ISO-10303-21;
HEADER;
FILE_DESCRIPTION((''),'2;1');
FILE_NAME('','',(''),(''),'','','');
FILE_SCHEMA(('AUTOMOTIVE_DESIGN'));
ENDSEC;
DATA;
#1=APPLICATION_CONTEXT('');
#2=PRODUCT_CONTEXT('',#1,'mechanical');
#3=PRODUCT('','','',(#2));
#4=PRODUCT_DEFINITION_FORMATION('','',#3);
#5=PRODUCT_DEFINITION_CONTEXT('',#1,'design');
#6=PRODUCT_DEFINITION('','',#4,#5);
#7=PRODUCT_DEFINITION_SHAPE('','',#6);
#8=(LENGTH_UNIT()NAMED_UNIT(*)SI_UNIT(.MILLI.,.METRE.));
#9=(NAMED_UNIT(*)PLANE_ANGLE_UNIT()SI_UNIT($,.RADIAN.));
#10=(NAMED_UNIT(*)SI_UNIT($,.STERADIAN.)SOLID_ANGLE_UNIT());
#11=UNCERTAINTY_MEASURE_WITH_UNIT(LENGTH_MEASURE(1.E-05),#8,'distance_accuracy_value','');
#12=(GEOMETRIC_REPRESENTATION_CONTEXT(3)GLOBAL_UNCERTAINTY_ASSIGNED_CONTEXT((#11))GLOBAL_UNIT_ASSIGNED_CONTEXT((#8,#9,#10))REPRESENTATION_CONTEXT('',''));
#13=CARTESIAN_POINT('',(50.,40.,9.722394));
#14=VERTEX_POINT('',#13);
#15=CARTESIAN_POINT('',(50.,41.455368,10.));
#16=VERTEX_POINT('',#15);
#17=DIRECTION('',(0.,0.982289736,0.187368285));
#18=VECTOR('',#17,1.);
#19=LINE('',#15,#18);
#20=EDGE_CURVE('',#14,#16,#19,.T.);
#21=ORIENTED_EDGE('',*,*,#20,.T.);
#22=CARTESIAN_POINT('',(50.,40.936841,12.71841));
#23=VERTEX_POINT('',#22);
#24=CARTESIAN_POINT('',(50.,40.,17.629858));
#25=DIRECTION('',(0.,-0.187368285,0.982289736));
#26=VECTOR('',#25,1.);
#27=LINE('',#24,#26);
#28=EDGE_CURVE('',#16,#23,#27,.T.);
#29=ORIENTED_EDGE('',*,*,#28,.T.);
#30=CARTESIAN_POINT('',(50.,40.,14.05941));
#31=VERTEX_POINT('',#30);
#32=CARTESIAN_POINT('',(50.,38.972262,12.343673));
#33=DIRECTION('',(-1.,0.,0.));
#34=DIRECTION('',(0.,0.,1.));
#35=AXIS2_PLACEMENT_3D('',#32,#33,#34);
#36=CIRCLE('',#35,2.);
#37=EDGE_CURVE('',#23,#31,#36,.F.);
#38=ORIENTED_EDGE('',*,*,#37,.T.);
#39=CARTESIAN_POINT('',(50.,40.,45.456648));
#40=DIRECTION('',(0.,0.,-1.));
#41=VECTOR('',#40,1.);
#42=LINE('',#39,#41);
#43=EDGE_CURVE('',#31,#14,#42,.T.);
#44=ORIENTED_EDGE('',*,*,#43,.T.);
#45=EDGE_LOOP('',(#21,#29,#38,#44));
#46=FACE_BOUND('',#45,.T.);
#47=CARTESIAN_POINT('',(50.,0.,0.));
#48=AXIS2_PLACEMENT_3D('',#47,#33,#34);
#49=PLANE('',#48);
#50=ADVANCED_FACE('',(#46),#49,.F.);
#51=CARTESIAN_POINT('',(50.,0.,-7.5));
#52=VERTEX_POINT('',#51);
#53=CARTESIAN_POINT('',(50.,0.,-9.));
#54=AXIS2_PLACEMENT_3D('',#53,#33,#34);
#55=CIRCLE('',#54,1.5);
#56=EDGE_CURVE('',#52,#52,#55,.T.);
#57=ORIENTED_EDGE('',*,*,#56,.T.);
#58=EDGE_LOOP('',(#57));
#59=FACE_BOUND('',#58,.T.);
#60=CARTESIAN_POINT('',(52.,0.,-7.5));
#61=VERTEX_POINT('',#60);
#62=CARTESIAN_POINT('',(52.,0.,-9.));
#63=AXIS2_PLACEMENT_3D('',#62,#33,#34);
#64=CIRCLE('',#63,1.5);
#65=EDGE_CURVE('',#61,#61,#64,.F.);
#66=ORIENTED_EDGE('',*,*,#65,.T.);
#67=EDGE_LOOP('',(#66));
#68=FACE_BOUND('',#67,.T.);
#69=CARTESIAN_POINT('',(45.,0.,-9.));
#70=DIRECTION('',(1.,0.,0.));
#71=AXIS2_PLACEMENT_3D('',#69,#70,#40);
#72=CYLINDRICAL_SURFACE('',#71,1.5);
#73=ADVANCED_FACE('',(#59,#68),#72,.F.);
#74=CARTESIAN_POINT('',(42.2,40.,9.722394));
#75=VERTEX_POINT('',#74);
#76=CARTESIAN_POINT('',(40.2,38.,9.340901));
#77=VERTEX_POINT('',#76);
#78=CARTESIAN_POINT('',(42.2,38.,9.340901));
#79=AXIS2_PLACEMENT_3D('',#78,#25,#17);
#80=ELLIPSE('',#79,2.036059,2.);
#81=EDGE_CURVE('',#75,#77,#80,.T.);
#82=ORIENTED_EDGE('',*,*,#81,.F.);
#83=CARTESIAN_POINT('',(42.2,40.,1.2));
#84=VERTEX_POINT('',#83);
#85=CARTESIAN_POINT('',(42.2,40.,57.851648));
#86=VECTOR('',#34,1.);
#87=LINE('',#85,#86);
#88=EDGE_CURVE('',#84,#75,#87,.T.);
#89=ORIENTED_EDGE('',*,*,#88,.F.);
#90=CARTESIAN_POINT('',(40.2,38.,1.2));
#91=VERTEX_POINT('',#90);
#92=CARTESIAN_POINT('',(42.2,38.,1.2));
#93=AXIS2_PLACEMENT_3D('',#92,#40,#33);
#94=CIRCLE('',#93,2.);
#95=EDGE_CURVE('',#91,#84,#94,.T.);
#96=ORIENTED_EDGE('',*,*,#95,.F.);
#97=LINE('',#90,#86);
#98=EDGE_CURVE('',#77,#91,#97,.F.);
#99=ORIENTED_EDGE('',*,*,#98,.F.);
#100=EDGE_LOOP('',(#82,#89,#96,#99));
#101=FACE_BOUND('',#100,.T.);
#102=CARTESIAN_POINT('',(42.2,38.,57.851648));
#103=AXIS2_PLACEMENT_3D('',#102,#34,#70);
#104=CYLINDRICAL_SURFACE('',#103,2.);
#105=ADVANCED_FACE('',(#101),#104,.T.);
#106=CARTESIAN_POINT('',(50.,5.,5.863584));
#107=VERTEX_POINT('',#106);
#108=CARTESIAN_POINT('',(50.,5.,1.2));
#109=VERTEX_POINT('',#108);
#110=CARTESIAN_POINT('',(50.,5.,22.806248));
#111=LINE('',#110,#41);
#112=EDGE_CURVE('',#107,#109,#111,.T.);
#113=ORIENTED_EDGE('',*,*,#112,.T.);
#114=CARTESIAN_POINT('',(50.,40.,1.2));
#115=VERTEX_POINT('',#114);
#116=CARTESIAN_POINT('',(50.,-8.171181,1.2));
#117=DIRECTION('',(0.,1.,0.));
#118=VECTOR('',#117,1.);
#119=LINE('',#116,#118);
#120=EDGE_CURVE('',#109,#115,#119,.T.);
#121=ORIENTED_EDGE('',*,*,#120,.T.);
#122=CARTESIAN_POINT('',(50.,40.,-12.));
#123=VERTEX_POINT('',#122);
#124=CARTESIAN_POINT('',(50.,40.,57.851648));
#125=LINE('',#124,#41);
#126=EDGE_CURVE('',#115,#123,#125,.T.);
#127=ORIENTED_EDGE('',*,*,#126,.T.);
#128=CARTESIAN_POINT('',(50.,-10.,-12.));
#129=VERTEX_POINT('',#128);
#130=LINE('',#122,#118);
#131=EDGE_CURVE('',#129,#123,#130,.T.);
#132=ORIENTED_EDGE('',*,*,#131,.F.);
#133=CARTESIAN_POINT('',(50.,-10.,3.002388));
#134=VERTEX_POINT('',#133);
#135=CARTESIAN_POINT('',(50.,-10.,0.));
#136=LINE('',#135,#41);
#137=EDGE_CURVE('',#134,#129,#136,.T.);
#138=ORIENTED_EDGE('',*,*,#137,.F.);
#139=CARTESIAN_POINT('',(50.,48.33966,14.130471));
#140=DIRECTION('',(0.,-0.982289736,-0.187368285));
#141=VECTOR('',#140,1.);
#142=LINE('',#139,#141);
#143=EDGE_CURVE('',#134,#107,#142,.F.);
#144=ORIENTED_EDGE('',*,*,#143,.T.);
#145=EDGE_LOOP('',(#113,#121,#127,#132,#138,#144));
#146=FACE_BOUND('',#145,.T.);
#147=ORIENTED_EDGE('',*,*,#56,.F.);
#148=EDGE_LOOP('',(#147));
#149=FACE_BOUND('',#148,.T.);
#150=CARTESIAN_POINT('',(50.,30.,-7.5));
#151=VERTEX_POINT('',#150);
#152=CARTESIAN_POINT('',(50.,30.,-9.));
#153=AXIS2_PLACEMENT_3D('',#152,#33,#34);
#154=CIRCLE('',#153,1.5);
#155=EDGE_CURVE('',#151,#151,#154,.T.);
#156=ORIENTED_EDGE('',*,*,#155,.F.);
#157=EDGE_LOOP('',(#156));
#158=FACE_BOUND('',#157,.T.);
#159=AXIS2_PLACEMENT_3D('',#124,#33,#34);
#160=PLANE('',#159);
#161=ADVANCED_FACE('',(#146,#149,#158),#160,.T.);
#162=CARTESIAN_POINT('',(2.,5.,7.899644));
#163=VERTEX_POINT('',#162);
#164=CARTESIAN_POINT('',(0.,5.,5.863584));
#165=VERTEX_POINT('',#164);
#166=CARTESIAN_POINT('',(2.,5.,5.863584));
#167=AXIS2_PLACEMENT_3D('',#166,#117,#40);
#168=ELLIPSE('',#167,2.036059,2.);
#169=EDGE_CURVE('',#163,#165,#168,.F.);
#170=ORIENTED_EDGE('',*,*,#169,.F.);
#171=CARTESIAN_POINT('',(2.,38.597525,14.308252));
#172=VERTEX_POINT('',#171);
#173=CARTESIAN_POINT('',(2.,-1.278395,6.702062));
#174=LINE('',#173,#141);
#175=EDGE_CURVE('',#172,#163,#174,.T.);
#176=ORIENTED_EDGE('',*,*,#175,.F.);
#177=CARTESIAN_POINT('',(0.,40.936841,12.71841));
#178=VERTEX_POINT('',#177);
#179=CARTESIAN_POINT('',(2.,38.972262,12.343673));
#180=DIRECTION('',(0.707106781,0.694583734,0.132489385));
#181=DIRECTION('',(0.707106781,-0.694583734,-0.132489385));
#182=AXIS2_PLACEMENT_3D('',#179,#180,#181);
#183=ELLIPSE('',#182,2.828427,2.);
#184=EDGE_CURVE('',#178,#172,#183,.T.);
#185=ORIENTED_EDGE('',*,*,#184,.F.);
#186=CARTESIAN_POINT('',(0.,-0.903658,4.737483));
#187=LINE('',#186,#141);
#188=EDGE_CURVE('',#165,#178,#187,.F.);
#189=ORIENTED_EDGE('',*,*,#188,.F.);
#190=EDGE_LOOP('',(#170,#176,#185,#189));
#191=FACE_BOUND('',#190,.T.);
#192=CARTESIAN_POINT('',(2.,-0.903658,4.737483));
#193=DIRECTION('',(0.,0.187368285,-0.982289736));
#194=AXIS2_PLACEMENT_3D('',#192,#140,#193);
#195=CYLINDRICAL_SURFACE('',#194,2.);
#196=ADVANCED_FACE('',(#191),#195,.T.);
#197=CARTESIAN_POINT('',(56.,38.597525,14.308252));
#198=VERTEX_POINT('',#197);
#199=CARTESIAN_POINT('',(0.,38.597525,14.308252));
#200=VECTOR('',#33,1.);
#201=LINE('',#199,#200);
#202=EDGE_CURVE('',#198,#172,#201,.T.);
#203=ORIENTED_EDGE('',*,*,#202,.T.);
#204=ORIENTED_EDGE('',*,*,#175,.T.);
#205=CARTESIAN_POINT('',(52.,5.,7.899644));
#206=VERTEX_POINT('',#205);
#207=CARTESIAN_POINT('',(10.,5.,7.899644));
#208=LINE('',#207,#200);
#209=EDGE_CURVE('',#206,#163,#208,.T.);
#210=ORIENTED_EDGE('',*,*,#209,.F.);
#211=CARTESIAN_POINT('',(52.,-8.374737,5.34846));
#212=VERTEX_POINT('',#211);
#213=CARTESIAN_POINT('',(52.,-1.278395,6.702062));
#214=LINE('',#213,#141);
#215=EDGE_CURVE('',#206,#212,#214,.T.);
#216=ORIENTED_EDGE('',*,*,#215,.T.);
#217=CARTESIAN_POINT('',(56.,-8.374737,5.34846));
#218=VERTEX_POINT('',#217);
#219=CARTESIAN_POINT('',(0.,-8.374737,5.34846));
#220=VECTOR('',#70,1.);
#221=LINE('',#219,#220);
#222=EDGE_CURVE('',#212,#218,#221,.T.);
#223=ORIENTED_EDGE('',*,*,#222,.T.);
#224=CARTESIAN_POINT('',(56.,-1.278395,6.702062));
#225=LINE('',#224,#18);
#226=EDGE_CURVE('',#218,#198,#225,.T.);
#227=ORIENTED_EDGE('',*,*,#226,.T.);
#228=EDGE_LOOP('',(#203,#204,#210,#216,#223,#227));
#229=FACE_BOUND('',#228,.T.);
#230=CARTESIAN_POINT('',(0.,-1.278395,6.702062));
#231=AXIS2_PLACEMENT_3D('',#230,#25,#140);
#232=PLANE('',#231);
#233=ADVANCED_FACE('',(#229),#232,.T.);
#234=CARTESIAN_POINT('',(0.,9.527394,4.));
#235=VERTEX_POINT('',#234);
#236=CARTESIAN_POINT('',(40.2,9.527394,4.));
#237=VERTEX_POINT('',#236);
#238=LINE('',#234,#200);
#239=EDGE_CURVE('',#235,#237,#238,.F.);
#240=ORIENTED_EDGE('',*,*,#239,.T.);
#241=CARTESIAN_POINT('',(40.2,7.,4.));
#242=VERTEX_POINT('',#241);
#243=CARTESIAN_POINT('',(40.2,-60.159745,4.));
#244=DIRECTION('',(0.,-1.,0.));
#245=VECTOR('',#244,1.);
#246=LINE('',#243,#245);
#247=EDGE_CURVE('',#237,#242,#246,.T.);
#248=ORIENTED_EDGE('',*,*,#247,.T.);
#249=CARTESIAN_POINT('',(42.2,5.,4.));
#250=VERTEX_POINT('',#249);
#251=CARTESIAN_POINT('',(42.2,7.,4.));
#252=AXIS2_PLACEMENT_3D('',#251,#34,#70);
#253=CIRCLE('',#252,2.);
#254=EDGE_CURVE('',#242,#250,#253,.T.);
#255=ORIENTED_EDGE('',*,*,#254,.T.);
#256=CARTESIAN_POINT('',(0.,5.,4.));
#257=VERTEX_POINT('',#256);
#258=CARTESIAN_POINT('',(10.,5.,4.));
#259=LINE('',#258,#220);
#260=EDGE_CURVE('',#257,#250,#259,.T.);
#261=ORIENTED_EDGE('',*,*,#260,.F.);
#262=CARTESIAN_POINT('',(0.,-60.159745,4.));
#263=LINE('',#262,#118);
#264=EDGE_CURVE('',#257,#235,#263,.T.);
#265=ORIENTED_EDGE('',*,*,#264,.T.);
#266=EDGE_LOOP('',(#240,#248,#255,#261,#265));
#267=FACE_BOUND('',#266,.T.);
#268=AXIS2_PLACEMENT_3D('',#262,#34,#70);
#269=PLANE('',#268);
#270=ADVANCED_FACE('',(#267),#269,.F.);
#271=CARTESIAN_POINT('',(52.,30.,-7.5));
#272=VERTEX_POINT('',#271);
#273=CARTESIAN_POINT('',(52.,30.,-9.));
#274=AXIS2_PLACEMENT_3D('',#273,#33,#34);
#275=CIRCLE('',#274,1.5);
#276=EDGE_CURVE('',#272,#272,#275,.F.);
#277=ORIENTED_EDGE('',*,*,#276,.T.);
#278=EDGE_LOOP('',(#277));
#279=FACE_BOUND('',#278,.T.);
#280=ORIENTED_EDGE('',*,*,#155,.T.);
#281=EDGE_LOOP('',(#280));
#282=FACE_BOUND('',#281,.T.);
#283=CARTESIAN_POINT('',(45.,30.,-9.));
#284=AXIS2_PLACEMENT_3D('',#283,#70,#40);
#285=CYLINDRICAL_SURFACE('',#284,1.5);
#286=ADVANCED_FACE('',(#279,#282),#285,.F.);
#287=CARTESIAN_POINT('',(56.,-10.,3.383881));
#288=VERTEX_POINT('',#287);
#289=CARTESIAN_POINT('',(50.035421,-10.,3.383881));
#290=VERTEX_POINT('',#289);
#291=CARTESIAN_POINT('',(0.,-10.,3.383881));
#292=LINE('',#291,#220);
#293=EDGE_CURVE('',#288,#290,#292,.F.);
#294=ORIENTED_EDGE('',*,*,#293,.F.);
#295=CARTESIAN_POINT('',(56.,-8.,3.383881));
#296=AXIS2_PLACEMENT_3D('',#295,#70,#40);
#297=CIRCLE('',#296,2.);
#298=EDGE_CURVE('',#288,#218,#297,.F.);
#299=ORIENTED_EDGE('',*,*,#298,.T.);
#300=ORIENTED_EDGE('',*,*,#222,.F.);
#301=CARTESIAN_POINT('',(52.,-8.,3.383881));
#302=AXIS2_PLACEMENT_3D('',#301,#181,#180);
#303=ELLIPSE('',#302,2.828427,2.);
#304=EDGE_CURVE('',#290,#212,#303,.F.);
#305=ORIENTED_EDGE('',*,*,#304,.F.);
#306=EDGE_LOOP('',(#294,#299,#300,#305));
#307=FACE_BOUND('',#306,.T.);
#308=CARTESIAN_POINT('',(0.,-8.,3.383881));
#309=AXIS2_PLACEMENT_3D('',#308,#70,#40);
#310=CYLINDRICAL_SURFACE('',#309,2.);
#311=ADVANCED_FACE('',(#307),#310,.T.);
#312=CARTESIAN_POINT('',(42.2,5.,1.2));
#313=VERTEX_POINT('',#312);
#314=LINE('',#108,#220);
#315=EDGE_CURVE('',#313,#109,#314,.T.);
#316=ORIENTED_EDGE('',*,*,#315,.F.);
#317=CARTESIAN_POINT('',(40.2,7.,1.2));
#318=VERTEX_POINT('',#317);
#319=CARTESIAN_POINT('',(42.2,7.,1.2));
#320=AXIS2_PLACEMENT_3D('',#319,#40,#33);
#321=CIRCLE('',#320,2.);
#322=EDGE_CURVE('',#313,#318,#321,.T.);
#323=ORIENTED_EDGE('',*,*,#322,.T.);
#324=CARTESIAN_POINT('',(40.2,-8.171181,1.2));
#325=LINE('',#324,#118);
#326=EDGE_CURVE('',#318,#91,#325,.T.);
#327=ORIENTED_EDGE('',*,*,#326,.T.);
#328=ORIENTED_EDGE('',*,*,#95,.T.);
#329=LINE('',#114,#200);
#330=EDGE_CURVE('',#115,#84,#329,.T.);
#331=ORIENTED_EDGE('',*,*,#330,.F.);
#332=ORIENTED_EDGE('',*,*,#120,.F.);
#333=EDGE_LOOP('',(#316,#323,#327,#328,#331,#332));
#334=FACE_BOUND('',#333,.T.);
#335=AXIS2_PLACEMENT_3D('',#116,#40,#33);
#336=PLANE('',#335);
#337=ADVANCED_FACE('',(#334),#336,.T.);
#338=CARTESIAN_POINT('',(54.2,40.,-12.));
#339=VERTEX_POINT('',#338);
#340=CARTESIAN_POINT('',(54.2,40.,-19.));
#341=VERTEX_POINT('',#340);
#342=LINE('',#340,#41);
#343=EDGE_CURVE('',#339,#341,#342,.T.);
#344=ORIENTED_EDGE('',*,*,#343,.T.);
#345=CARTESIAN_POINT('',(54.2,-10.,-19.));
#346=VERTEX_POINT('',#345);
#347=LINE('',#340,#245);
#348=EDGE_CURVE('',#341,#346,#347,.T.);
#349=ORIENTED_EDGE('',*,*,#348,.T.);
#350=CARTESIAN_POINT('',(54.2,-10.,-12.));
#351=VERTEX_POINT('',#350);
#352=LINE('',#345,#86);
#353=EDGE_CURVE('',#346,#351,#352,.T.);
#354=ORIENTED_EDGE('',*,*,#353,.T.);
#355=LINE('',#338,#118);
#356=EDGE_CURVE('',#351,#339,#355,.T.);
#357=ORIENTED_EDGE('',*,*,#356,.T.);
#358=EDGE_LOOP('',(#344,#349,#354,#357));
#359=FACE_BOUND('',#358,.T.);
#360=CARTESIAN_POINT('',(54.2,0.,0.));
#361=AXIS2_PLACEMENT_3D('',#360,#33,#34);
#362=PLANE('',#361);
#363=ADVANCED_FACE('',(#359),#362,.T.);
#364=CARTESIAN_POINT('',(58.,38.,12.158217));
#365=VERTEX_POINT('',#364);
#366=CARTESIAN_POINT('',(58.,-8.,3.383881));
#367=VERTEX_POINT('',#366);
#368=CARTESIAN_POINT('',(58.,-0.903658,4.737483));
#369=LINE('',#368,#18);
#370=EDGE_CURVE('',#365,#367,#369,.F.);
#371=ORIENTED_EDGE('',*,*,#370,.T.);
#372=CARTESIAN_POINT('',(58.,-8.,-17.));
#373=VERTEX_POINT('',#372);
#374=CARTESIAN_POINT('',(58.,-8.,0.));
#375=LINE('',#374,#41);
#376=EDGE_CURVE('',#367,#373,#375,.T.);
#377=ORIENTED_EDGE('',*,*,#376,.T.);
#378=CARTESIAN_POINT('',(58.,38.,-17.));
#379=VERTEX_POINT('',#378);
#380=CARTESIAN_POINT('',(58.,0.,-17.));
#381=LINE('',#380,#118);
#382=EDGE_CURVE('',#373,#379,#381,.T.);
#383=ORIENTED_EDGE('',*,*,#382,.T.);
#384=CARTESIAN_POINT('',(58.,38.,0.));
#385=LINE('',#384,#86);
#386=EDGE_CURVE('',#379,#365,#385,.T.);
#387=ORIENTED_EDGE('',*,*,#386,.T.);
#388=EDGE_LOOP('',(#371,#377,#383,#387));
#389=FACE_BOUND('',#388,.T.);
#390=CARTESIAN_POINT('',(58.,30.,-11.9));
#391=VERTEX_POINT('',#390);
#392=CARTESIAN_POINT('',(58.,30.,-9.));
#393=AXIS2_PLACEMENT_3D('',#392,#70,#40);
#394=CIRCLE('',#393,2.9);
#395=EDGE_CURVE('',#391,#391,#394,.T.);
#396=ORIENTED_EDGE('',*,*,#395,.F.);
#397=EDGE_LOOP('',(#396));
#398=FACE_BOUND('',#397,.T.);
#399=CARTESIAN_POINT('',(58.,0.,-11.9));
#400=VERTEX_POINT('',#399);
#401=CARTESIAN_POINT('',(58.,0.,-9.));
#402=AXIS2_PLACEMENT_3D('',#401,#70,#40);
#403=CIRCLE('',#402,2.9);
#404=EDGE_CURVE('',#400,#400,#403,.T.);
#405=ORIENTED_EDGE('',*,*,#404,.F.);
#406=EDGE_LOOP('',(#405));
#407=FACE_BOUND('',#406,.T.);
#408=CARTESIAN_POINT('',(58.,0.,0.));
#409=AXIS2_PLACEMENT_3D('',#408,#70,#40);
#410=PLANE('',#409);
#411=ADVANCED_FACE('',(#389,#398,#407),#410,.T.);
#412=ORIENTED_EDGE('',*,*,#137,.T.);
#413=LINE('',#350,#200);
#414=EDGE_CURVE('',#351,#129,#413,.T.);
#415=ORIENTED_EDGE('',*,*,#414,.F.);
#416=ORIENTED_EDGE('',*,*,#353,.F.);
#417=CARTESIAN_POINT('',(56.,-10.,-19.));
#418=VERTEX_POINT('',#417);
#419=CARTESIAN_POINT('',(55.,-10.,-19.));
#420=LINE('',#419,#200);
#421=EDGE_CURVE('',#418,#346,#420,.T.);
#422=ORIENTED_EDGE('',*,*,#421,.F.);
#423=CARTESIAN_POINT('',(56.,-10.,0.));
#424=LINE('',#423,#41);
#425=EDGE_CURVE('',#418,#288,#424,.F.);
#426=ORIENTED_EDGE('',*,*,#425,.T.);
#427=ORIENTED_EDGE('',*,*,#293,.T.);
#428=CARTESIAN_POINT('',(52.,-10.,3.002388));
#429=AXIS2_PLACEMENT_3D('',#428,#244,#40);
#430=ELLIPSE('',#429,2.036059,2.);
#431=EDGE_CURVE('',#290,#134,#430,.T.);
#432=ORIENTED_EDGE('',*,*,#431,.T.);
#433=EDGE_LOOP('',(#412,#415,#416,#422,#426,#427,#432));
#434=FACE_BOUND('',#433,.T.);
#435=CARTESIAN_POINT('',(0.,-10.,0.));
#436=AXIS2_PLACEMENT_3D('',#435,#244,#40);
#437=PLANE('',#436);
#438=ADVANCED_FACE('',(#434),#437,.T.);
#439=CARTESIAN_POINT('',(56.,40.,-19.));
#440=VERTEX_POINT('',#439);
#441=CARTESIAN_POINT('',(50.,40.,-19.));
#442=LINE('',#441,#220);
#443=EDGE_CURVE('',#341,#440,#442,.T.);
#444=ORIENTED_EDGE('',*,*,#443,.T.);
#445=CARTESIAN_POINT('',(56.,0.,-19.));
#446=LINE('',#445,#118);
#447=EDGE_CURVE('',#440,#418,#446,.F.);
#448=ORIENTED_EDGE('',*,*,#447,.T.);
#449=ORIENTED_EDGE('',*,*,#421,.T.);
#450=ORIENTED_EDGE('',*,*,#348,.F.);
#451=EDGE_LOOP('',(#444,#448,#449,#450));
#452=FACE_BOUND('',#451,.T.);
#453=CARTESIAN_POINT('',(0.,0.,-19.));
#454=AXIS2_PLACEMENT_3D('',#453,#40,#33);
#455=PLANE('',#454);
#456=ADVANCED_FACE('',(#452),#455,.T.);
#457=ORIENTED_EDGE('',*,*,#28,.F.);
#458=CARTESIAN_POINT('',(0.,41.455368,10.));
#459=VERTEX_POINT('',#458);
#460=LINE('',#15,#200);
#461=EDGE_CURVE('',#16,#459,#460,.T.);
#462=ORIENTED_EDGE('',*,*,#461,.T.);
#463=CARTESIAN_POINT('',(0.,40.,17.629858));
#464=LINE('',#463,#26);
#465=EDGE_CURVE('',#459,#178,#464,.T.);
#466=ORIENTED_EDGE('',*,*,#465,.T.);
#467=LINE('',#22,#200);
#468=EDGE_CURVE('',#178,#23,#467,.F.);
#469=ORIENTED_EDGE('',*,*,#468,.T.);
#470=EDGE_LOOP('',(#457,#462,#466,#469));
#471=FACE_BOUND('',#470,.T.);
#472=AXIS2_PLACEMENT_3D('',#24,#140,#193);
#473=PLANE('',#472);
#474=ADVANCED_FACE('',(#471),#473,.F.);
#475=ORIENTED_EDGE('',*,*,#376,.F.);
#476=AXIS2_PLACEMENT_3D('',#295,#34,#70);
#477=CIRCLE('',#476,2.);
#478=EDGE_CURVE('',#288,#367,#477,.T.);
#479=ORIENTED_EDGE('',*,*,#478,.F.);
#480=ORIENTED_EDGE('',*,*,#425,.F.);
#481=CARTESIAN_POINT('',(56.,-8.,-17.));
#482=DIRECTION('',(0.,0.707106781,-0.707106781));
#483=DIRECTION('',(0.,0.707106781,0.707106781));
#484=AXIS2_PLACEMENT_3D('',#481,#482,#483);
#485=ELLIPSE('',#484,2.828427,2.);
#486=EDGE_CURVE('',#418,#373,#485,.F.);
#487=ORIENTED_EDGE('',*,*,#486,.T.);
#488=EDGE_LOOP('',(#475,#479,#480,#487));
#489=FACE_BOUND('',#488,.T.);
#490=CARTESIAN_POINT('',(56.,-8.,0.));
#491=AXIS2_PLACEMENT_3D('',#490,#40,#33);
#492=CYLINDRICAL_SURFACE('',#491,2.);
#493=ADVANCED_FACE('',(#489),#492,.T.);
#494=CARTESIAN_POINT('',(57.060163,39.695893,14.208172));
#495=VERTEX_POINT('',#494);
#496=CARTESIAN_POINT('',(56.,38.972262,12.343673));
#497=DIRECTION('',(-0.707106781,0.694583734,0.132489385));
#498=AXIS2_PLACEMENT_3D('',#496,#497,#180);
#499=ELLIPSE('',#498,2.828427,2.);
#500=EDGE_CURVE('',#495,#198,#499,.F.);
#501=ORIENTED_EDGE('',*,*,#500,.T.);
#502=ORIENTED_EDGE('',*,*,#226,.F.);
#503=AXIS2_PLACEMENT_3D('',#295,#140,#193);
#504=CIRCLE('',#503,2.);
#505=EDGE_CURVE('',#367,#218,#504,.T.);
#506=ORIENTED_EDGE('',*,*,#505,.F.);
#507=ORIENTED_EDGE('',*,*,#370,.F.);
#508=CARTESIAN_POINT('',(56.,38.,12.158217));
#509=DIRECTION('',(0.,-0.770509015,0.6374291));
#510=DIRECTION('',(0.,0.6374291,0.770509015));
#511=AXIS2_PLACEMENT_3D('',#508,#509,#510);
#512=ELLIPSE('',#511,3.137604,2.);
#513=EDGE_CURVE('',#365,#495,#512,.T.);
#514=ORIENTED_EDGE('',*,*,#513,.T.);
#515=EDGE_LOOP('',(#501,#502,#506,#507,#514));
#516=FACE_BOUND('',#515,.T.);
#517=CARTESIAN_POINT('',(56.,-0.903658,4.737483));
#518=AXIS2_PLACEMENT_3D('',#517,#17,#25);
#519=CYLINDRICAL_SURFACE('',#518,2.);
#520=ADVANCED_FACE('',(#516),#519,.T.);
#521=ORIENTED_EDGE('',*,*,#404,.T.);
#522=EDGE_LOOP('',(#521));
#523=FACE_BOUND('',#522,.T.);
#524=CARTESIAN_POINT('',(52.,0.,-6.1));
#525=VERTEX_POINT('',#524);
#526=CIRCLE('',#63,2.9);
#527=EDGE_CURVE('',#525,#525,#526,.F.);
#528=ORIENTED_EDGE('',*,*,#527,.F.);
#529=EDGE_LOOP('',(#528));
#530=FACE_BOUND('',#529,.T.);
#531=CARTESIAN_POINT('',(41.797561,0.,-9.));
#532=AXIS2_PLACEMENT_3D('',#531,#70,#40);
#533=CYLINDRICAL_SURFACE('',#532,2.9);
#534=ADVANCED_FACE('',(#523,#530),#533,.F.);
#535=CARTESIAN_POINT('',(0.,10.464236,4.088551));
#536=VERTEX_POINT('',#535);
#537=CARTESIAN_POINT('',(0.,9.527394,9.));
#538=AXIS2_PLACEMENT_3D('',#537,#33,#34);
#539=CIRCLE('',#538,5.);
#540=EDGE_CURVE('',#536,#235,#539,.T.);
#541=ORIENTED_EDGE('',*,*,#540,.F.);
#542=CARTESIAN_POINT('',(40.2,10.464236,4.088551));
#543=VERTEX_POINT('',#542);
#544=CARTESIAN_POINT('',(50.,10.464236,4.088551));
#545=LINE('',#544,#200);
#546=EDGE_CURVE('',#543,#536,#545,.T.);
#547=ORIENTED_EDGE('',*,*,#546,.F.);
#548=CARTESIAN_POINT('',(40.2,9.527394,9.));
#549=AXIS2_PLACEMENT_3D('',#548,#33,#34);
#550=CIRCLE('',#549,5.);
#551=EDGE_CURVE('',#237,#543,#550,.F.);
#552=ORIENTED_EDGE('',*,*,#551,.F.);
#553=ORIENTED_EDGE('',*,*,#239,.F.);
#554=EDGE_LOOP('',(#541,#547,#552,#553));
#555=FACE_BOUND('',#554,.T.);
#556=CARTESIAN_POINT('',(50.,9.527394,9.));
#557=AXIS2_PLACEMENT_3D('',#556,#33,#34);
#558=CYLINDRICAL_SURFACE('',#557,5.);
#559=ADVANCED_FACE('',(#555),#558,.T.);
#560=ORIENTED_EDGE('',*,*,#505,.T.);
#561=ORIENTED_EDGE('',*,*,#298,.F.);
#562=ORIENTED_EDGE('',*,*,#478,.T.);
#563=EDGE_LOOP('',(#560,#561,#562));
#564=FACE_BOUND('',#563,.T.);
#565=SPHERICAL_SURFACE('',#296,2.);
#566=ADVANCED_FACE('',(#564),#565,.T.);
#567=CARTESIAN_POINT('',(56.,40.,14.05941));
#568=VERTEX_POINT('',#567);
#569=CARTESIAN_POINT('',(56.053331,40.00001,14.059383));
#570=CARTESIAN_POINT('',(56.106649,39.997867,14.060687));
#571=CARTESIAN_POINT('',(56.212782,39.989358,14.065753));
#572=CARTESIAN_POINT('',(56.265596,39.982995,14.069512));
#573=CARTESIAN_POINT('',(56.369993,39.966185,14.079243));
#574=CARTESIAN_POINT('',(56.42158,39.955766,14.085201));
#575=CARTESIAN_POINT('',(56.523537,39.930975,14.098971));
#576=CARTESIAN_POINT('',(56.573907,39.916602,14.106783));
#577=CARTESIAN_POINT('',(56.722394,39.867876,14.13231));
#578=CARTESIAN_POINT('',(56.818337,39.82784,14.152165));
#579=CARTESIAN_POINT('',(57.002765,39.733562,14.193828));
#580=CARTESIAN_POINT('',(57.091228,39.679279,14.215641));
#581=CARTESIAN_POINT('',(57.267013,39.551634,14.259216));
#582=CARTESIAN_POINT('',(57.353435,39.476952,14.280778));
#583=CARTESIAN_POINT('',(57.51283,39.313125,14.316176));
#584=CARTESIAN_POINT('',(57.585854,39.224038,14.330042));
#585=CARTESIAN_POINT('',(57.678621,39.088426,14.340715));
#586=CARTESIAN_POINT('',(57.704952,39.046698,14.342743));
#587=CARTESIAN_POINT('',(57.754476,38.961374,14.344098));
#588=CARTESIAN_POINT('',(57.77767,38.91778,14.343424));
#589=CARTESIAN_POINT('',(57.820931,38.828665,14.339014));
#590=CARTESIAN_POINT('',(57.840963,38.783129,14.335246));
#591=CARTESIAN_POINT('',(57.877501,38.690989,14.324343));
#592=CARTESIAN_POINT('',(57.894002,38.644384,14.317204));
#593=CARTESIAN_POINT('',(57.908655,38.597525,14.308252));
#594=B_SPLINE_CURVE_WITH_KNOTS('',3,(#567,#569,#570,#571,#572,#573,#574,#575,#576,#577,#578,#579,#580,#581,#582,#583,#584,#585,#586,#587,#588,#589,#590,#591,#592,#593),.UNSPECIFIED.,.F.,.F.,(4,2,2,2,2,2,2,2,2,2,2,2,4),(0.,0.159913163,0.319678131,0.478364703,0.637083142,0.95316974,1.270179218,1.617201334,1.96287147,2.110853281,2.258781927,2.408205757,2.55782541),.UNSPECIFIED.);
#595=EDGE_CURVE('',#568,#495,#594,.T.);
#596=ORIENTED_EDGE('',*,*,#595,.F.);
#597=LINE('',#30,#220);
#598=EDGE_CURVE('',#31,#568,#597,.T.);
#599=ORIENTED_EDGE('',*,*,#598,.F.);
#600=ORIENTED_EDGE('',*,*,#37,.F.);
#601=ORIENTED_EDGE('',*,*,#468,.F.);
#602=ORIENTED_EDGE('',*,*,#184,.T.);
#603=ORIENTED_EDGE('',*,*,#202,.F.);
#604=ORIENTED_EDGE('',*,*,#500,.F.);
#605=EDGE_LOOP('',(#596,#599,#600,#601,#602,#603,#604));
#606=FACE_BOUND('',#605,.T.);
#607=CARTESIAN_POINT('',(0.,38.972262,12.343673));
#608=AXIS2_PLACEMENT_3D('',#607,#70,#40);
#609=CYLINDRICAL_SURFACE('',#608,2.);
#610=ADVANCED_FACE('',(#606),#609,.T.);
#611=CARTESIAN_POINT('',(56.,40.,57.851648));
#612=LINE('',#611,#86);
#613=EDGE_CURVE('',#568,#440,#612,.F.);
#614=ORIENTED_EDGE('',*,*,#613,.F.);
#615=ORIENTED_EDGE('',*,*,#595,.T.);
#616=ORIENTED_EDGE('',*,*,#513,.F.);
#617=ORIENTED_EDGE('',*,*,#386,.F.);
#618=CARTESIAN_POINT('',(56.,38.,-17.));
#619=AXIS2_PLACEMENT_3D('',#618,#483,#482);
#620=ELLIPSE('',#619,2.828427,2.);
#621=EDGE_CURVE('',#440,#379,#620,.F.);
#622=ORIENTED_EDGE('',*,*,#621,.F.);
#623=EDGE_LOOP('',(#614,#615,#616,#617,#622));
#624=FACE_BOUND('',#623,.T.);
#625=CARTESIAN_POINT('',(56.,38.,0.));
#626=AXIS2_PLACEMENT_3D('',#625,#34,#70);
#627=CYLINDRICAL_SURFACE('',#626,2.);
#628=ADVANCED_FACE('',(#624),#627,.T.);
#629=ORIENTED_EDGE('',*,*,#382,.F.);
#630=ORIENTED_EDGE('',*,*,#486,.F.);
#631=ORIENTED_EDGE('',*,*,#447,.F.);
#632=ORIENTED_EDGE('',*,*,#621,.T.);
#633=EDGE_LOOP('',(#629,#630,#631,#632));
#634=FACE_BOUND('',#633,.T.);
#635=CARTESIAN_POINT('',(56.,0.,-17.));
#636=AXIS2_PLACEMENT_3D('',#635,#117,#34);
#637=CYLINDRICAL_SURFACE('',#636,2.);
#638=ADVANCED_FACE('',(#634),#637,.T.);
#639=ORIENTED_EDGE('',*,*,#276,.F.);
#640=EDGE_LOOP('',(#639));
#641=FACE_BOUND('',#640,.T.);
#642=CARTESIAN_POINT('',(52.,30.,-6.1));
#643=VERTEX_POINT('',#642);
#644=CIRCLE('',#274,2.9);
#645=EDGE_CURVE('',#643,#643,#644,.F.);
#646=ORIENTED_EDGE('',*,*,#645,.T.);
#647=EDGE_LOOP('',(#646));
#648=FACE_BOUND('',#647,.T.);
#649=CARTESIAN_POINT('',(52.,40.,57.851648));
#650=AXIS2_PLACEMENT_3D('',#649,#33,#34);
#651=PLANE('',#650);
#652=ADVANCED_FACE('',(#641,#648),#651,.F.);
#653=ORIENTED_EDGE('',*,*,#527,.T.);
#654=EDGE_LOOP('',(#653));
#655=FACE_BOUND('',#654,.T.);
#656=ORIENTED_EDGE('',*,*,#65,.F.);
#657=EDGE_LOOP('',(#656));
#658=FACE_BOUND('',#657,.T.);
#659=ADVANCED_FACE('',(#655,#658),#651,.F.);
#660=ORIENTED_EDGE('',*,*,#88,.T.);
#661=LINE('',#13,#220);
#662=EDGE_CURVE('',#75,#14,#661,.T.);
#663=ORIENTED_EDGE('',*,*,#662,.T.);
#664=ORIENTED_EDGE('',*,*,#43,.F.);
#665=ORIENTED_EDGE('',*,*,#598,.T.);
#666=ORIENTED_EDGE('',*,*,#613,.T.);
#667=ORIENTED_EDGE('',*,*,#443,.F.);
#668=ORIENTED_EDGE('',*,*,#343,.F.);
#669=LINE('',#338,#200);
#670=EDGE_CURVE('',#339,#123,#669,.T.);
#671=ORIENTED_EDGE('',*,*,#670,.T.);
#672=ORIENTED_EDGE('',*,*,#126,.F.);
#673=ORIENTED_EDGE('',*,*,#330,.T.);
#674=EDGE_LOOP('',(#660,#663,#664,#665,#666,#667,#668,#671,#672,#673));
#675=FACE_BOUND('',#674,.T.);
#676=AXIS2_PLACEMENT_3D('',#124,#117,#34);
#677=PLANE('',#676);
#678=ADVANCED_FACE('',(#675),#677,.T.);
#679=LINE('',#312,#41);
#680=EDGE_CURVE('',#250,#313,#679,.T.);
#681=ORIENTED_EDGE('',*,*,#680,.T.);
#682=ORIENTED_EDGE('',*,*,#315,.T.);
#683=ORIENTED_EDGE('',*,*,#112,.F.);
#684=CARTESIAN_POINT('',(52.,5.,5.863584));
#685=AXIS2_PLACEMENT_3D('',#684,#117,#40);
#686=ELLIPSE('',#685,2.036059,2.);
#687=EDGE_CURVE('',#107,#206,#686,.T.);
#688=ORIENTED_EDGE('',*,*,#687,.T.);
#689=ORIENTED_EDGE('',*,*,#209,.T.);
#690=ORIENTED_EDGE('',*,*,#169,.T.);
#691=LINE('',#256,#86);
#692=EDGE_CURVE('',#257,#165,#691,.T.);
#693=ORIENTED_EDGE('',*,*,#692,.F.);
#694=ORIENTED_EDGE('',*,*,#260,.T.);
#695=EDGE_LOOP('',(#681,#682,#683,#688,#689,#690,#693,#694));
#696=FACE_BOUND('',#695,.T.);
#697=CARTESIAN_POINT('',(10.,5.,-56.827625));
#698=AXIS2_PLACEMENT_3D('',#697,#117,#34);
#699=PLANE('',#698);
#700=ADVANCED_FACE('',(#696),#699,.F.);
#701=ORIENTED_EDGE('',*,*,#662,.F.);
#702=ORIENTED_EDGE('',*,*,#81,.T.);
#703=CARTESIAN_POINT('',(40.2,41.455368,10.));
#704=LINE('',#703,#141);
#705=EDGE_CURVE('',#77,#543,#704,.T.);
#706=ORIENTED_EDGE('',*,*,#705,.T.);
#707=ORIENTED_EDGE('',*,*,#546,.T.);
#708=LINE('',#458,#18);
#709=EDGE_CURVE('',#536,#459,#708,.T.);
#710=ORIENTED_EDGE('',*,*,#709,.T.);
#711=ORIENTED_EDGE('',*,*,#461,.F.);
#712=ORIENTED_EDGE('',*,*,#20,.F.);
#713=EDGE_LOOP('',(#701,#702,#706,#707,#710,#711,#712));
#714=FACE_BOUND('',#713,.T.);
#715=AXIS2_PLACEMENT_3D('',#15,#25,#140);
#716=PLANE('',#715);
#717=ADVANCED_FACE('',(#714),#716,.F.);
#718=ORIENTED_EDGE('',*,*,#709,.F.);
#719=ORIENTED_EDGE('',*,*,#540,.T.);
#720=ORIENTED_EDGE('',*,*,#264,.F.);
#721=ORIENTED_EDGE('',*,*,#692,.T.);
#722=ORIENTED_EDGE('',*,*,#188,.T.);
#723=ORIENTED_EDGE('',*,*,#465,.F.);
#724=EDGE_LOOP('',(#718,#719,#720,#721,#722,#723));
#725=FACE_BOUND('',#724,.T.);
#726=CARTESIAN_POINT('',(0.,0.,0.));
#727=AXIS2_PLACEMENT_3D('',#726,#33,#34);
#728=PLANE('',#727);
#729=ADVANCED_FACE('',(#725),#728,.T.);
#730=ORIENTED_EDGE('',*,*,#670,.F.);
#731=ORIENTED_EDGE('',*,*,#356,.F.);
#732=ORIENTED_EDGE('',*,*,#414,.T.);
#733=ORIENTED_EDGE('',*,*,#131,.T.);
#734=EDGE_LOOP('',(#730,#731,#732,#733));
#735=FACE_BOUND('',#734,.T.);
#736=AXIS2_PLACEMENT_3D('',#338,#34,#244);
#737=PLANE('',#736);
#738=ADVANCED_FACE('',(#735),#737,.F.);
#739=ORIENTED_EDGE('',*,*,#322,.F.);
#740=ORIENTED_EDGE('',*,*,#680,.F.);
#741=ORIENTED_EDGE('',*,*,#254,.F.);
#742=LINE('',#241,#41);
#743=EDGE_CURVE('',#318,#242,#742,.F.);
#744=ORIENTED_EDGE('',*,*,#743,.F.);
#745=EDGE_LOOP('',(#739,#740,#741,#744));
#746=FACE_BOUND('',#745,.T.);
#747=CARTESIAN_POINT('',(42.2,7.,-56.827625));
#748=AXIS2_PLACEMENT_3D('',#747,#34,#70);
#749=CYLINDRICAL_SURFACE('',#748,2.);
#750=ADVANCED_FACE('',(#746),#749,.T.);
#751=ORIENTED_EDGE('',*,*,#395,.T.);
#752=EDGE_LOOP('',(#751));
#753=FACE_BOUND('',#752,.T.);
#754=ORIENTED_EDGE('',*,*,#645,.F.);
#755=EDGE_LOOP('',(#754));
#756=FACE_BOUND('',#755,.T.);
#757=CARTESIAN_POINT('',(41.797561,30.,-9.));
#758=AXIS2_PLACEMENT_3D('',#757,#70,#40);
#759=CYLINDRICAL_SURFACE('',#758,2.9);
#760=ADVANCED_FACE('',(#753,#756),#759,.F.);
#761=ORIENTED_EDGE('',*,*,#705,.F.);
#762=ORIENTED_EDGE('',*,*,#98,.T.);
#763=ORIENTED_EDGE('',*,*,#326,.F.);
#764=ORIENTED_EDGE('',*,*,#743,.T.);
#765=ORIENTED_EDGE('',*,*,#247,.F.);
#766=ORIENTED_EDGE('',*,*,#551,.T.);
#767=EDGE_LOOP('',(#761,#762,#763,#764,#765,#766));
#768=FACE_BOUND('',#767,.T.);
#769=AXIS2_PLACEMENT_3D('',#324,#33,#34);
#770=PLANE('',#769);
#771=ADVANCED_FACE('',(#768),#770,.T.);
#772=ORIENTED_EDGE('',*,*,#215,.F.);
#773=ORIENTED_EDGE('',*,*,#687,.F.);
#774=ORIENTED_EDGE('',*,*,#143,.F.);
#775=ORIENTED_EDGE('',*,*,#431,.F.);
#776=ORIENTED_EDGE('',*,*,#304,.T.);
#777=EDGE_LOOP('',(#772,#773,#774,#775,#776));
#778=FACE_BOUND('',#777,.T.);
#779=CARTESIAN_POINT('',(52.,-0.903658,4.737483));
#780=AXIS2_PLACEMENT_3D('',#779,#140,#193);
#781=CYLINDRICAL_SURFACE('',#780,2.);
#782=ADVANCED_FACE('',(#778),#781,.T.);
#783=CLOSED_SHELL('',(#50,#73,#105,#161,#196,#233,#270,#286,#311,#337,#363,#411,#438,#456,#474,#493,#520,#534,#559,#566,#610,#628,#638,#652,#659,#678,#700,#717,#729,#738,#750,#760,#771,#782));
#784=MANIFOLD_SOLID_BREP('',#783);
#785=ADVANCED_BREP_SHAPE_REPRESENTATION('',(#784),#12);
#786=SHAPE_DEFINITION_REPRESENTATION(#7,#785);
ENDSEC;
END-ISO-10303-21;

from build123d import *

# Parameters (mm, degrees)
EXTRUDE_1_DEPTH      = 50
SKETCH_2_W           = 50
SKETCH_2_H           = 10
EXTRUDE_2_DEPTH      = 10
SKETCH_3_W           = 10
SKETCH_3_H           = 20
EXTRUDE_3_DEPTH      = 20
SKETCH_4_W           = 20
SKETCH_4_H           = 10
EXTRUDE_4_DEPTH      = 30
CUT_EXTRUDE_1_DEPTH  = 50
CHAMFER_1_SIZE       = 2
SKETCH_9_R           = 1.5
CUT_EXTRUDE_2_DEPTH  = 66.715656955
CUT_EXTRUDE_4_DEPTH  = 6
SKETCH_13_W          = 4
SKETCH_13_H          = 6
EXTRUDE_12_DEPTH     = 18.003980276
SKETCH_15_W          = 20
SKETCH_15_H          = 50
SKETCH_15_R          = 1.5
EXTRUDE_14_DEPTH     = 4
CUT_EXTRUDE_5_DEPTH  = 4
SKETCH_17_W          = 20
SKETCH_17_H          = 20
EXTRUDE_15_DEPTH     = 6
SKETCH_18_W          = 50
SKETCH_18_H          = 4
CUT_EXTRUDE_6_DEPTH  = 20
SKETCH_19_W          = 4
SKETCH_19_H          = 4
CUT_EXTRUDE_9_DEPTH  = 18.003980276
EXTRUDE_16_REACH     = 84.488
SKETCH_20_W          = 5
SKETCH_20_H          = 30
EXTRUDE_17_DEPTH     = 18.003980276
SKETCH_22_W          = 60
SKETCH_22_H          = 10
CUT_EXTRUDE_10_DEPTH = 6
SKETCH_23_R          = 1.5
CUT_EXTRUDE_11_DEPTH = 4
CHAMFER_2_SIZE       = 1
SKETCH_24_R          = 3
CUT_EXTRUDE_12_DEPTH = 2
SKETCH_25_W          = 15
SKETCH_25_H          = 50
CUT_EXTRUDE_13_DEPTH = 10
SKETCH_26_W          = 5
SKETCH_26_H          = 50
EXTRUDE_18_DEPTH     = 19
SKETCH_27_W          = 7
SKETCH_27_H          = 50
CUT_EXTRUDE_14_DEPTH = 4.2
EXTRUDE_19_DEPTH     = 3
SKETCH_29_R          = 1.5
CUT_EXTRUDE_15_DEPTH = 13
SKETCH_30_R          = 2.9
CUT_EXTRUDE_16_DEPTH = 6
SKETCH_31_W          = 6
SKETCH_31_H          = 10
CUT_EXTRUDE_17_DEPTH = 10
SKETCH_32_W          = 8
SKETCH_32_H          = 10
EXTRUDE_20_DEPTH     = 6
SKETCH_33_W          = 50
SKETCH_33_H          = 5
CUT_EXTRUDE_18_DEPTH = 6
EXTRUDE_21_REACH     = 80.899
SKETCH_34_W          = 9.8
SKETCH_34_H          = 8.8
CUT_EXTRUDE_19_DEPTH = 3
SKETCH_36_W          = 58
SKETCH_36_H          = 4.873682846
CUT_EXTRUDE_20_DEPTH = 24
SKETCH_37_W          = 8
SKETCH_37_H          = 3
CUT_EXTRUDE_21_DEPTH = 24
FILLET_1_R           = 2
FILLET_2_R           = 2
FILLET_3_R           = 5


with BuildPart() as part:
    # 草图1 → 凸台-拉伸1 (new body)
    with BuildSketch(Plane(origin=(0, 0, 0), x_dir=(0, 0, -1), z_dir=(1, 0, 0))):
        Polygon((0, 0), (-10, 0), (-17.629858184, 40), (-10, 41.455368398), (-4, 10), (0, 10), align=None)
    extrude(amount=EXTRUDE_1_DEPTH)

    # 草图2 → 凸台-拉伸2 (add)
    with BuildSketch(Plane.XZ):
        with Locations((25, 5)):
            Rectangle(SKETCH_2_W, SKETCH_2_H)
    extrude(amount=EXTRUDE_2_DEPTH)

    # 草图3 → 凸台-拉伸3 (add)
    with BuildSketch(Plane.ZY):
        with Locations((5, 0)):
            Rectangle(SKETCH_3_W, SKETCH_3_H)
    extrude(amount=EXTRUDE_3_DEPTH)

    # 草图4 → 凸台-拉伸4 (add)
    with BuildSketch(Plane(origin=(0, 10, 0), x_dir=(1, 0, 0), z_dir=(0, 1, 0))):
        with Locations((-10, -5)):
            Rectangle(SKETCH_4_W, SKETCH_4_H)
    extrude(amount=EXTRUDE_4_DEPTH)

    # 草图5 → 切除-拉伸1 (cut)
    with BuildSketch(Plane(origin=(50, 0, 0), x_dir=(0, 0, -1), z_dir=(1, 0, 0))):
        Polygon((-10, 10.003980276), (-11.908223769, 10.003980276), (-10, 0), align=None)
    extrude(amount=-CUT_EXTRUDE_1_DEPTH, mode=Mode.SUBTRACT)

    # 倒角1
    # the kernel refuses this chamfer: 2 mm, written as the material it adds along each edge
    with BuildSketch(Plane(origin=(50, 10.003980276, 10), x_dir=(0, 0.027495876610586487, 0.9996219169112968), z_dir=(-1, 0, 0))) as chamfer_1_piece_1_section:
        Polygon((CHAMFER_1_SIZE * 0.999621916911, -CHAMFER_1_SIZE * 0.0274958766106), (-CHAMFER_1_SIZE * 0.0274958766106, -CHAMFER_1_SIZE * 0.999621916911), (0, 0), align=None)
    chamfer_1_piece_1 = extrude(amount=50, mode=Mode.PRIVATE)
    chamfer_1_piece_1 = split(chamfer_1_piece_1, bisect_by=Plane(origin=(25, 9.131023425, 11.741710345), z_dir=(0, 0.18736828457892524, -0.9822897362458548)), keep=Keep.TOP, mode=Mode.PRIVATE)
    add(chamfer_1_piece_1)

    # 草图9 → 切除-拉伸2 (cut, through all)
    with BuildSketch(Plane.XY.offset(10)):
        with Locations((-10, 30)):
            Circle(SKETCH_9_R)
        with Locations((-10, 0)):
            Circle(SKETCH_9_R)
    extrude(amount=-CUT_EXTRUDE_2_DEPTH, mode=Mode.SUBTRACT)

    # 草图12 → 切除-拉伸4 (cut)
    with BuildSketch(Plane.XY.offset(10)):
        Polygon((50, -10), (50, 8.003980276), (0, 8.003980276), (0, 40), (-20, 40), (-20, -10), align=None)
    extrude(amount=-CUT_EXTRUDE_4_DEPTH, mode=Mode.SUBTRACT)

    # 草图13 → 凸台-拉伸12 (add)
    with BuildSketch(Plane.XZ.offset(-8.003980276)):
        with Locations((2, 7)):
            Rectangle(SKETCH_13_W, SKETCH_13_H)
        with Locations((48, 7)):
            Rectangle(SKETCH_13_W, SKETCH_13_H)
    extrude(amount=EXTRUDE_12_DEPTH)

    # 草图15 → 凸台-拉伸14 (add)
    with BuildSketch(Plane(origin=(0, 0, 0), x_dir=(-1, 0, 0), z_dir=(0, 0, -1))):
        with Locations((-60, 15)):
            Rectangle(SKETCH_15_W, SKETCH_15_H)
        with Locations(Location((-60, 30, 0), (0, 0, 180))):
            Circle(SKETCH_15_R, mode=Mode.SUBTRACT)
    extrude(amount=-EXTRUDE_14_DEPTH)

    # 草图16 → 切除-拉伸5 (cut)
    with BuildSketch(Plane.XY.offset(4)):
        Polygon((-20, -10), (0, -10), (0, 10), (0, 40), (-20, 40), align=None)
    extrude(amount=-CUT_EXTRUDE_5_DEPTH, mode=Mode.SUBTRACT)

    # 草图17 → 凸台-拉伸15 (add)
    with BuildSketch(Plane.XY.offset(4)):
        with Locations((60, 0)):
            Rectangle(SKETCH_17_W, SKETCH_17_H)
    extrude(amount=EXTRUDE_15_DEPTH)

    # 草图18 → 切除-拉伸6 (cut)
    with BuildSketch(Plane(origin=(0, 10, 0), x_dir=(1, 0, 0), z_dir=(0, 1, 0))):
        with Locations((25, -2)):
            Rectangle(SKETCH_18_W, SKETCH_18_H)
    extrude(amount=-CUT_EXTRUDE_6_DEPTH, mode=Mode.SUBTRACT)

    # 草图19 → 切除-拉伸9 (cut)
    with BuildSketch(Plane.XZ.offset(10)):
        with Locations((48, 8)):
            Rectangle(SKETCH_19_W, SKETCH_19_H)
        with Locations((2, 8)):
            Rectangle(SKETCH_19_W, SKETCH_19_H)
    extrude(amount=-CUT_EXTRUDE_9_DEPTH, mode=Mode.SUBTRACT)

    # 凸台-拉伸16: up to this plane
    extrude_16_end = Plane(origin=(50, 0, 10), z_dir=(0, 0.18736828457892524, -0.9822897362458548))
    # 草图20 → 凸台-拉伸16 (add, up to the surface)
    with BuildSketch(Plane.XY.offset(4), mode=Mode.PRIVATE) as extrude_16_sk1:
        with Locations((52.5, 25)):
            Rectangle(SKETCH_20_W, SKETCH_20_H)
    extrude_16_tool1 = split(extrude(extrude_16_sk1.sketch, amount=EXTRUDE_16_REACH, mode=Mode.PRIVATE), bisect_by=extrude_16_end, keep=Keep.BOTH, mode=Mode.PRIVATE)
    add(extrude_16_tool1.solids().sort_by_distance((52.5, 25, 4))[0])

    # 草图21 → 凸台-拉伸17 (add)
    with BuildSketch(Plane.XZ.offset(-8.003980276)):
        Polygon((50, 6), (50, 10), (0, 10), (0, 6), (4, 6), (4, 4), (46, 4), (46, 6), align=None)
    extrude(amount=EXTRUDE_17_DEPTH)

    # 草图22 → 切除-拉伸10 (cut)
    with BuildSketch(Plane.XY.offset(10)):
        with Locations((40, 0)):
            Rectangle(SKETCH_22_W, SKETCH_22_H)
    extrude(amount=-CUT_EXTRUDE_10_DEPTH, mode=Mode.SUBTRACT)

    # 草图23 → 切除-拉伸11 (cut)
    with BuildSketch(Plane(origin=(0, 0, 0), x_dir=(-1, 0, 0), z_dir=(0, 0, -1))):
        with Locations((-60, 0)):
            Circle(SKETCH_23_R)
    extrude(amount=-CUT_EXTRUDE_11_DEPTH, mode=Mode.SUBTRACT)

    # 倒角2
    chamfer_2_edges = [part.edges().sort_by_distance(p)[0] for p in [
        (52.5, 10, 10),
    ]]
    chamfer(chamfer_2_edges, length=CHAMFER_2_SIZE)

    # 草图24 → 切除-拉伸12 (cut)
    with BuildSketch(Plane.XY.offset(4)):
        with Locations((60, 30)):
            Circle(SKETCH_24_R)
        with Locations((60, 0)):
            Circle(SKETCH_24_R)
    extrude(amount=-CUT_EXTRUDE_12_DEPTH, mode=Mode.SUBTRACT)

    # 草图25 → 切除-拉伸13 (cut)
    with BuildSketch(Plane.XY.offset(10)):
        with Locations((62.5, 15)):
            Rectangle(SKETCH_25_W, SKETCH_25_H)
    extrude(amount=-CUT_EXTRUDE_13_DEPTH, mode=Mode.SUBTRACT)

    # 草图26 → 凸台-拉伸18 (add)
    with BuildSketch(Plane(origin=(0, 0, 0), x_dir=(-1, 0, 0), z_dir=(0, 0, -1))):
        with Locations((-52.5, 15)):
            Rectangle(SKETCH_26_W, SKETCH_26_H)
    extrude(amount=EXTRUDE_18_DEPTH)

    # 草图27 → 切除-拉伸14 (cut)
    with BuildSketch(Plane.ZY.offset(-50)):
        with Locations((-15.5, 15)):
            Rectangle(SKETCH_27_W, SKETCH_27_H)
    extrude(amount=-CUT_EXTRUDE_14_DEPTH, mode=Mode.SUBTRACT)

    # 草图28 → 凸台-拉伸19 (add)
    with BuildSketch(Plane(origin=(55, 0, 0), x_dir=(0, 0, -1), z_dir=(1, 0, 0))):
        Polygon((-10, -5), (-10, -10), (19, -10), (19, 40), (-17.629858184, 40), (-11.907464546, 10), (-11, 10), (-10, 9), (-10, 5), (-4, 5), (-4, -5), align=None)
    extrude(amount=EXTRUDE_19_DEPTH)

    # 草图29 → 切除-拉伸15 (cut)
    with BuildSketch(Plane(origin=(58, 0, 0), x_dir=(0, 0, -1), z_dir=(1, 0, 0))):
        with Locations((9, 30)):
            Circle(SKETCH_29_R)
        with Locations((9, 0)):
            Circle(SKETCH_29_R)
    extrude(amount=-CUT_EXTRUDE_15_DEPTH, mode=Mode.SUBTRACT)

    # 草图30 → 切除-拉伸16 (cut)
    with BuildSketch(Plane(origin=(58, 0, 0), x_dir=(0, 0, -1), z_dir=(1, 0, 0))):
        with Locations((9, 30)):
            Circle(SKETCH_30_R)
        with Locations((9, 0)):
            Circle(SKETCH_30_R)
    extrude(amount=-CUT_EXTRUDE_16_DEPTH, mode=Mode.SUBTRACT)

    # 草图31 → 切除-拉伸17 (cut)
    with BuildSketch(Plane(origin=(10, 0, 0), x_dir=(0, 0, -1), z_dir=(1, 0, 0))):
        with Locations((-7, 0)):
            Rectangle(SKETCH_31_W, SKETCH_31_H)
    extrude(amount=-CUT_EXTRUDE_17_DEPTH, mode=Mode.SUBTRACT)

    # 草图32 → 凸台-拉伸20 (add)
    with BuildSketch(Plane.XY.offset(4)):
        with Locations((54, 0)):
            Rectangle(SKETCH_32_W, SKETCH_32_H)
    extrude(amount=EXTRUDE_20_DEPTH)

    # 草图33 → 切除-拉伸18 (cut)
    with BuildSketch(Plane.XY.offset(10)):
        with Locations((25, -7.5)):
            Rectangle(SKETCH_33_W, SKETCH_33_H)
    extrude(amount=-CUT_EXTRUDE_18_DEPTH, mode=Mode.SUBTRACT)

    # 凸台-拉伸21: up to this face of the body (flat: up to its plane)
    extrude_21_end = Plane(part.part.faces().sort_by_distance((25, 5, 7))[0])
    # 草图34 → 凸台-拉伸21 (add, up to the picked face)
    with BuildSketch(Plane(origin=(0, 40, 0), x_dir=(1, 0, 0), z_dir=(0, 1, 0)), mode=Mode.PRIVATE) as extrude_21_sk1:
        with Locations((45.1, -5.6)):
            Rectangle(SKETCH_34_W, SKETCH_34_H)
    extrude_21_tool1 = split(extrude(extrude_21_sk1.sketch, amount=-EXTRUDE_21_REACH, mode=Mode.PRIVATE), bisect_by=extrude_21_end, keep=Keep.BOTH, mode=Mode.PRIVATE)
    add(extrude_21_tool1.solids().sort_by(Axis((45.1, 40, 5.6), (0, -1, 0)))[0])

    # 草图35 → 切除-拉伸19 (cut)
    with BuildSketch(Plane(origin=(0, -1.840499428, 9.648931259), x_dir=(1, 0, 0), z_dir=(0, -0.18736828457892524, 0.9822897362458548))):
        Polygon((0, 42.594865735), (0, 11.9425774), (50, 11.9425774), (50, 12.053978568), (58, 12.053978568), (58, 42.594865735), (50, 42.594865735), align=None)
    extrude(amount=-CUT_EXTRUDE_19_DEPTH, mode=Mode.SUBTRACT)

    # 草图36 → 切除-拉伸20 (cut)
    with BuildSketch(Plane(origin=(0, 11.731071204, 2.237660241), x_dir=(1, 0, 0), z_dir=(0, 0.9822897362458547, 0.18736828457892518))):
        with Locations((29, -9.259738785)):
            Rectangle(SKETCH_36_W, SKETCH_36_H)
    extrude(amount=-CUT_EXTRUDE_20_DEPTH, mode=Mode.SUBTRACT)

    # 草图37 → 切除-拉伸21 (cut)
    with BuildSketch(Plane(origin=(0, 11.840499428, 2.258533287), x_dir=(1, 0, 0), z_dir=(0, 0.9822897362458547, 0.18736828457892518))):
        with Locations((54, -8.322897362)):
            Rectangle(SKETCH_37_W, SKETCH_37_H)
    extrude(amount=-CUT_EXTRUDE_21_DEPTH, mode=Mode.SUBTRACT)

    # 圆角1
    fillet_1_edges = [part.edges().sort_by_distance(p)[0] for p in [
        (40.2, 40, 5.461196819),
        (40.2, 5, 2.6),
    ]]
    fillet(fillet_1_edges, radius=FILLET_1_R)

    # 圆角2
    # the kernel refuses this fillet: 2 mm, written as the material it takes off along each edge
    with BuildSketch(Plane(origin=(56, -8, 3.383880502), x_dir=(0, -1, 0), z_dir=(1, 0, 0))) as fillet_2_piece_1_section:
        Polygon((0, 0), (FILLET_2_R * 1.02, 0), (FILLET_2_R * 1.02, -FILLET_2_R * 0.843828779986), (FILLET_2_R * 0.191115650271, -FILLET_2_R * 1.00193553097), align=None)
    fillet_2_piece_1 = extrude(amount=FILLET_2_R * 1.02, mode=Mode.PRIVATE)
    fillet_2_piece_1 = fillet_2_piece_1 - Plane(origin=(56, -8, 3.383880502), x_dir=(0, 0.7705090150604746, -0.637429100144116), z_dir=(1, 0, 0)) * Sphere(FILLET_2_R, mode=Mode.PRIVATE)
    add(fillet_2_piece_1, mode=Mode.SUBTRACT)
    with BuildSketch(Plane(origin=(50, -21.787476835, 2.790027322), x_dir=(0, 0.1873682845789252, -0.9822897362458548), z_dir=(0, 0.9822897362458548, 0.1873682845789252))) as fillet_2_piece_2_section:
        with BuildLine():
            CenterArc((FILLET_2_R, -FILLET_2_R), FILLET_2_R, 90, 90)
            Line((0, -FILLET_2_R), (-FILLET_2_R * 0.02, -FILLET_2_R))
            Line((-FILLET_2_R * 0.02, -FILLET_2_R), (-FILLET_2_R * 0.02, FILLET_2_R * 0.02))
            Line((-FILLET_2_R * 0.02, FILLET_2_R * 0.02), (FILLET_2_R, FILLET_2_R * 0.02))
            Line((FILLET_2_R, FILLET_2_R * 0.02), (FILLET_2_R, 0))
        make_face()
    fillet_2_piece_2 = extrude(amount=39.270443584, mode=Mode.PRIVATE)
    fillet_2_piece_2 = split(fillet_2_piece_2, bisect_by=Plane(origin=(50.453560867, 5, 4.893277607), z_dir=(0, -1, 0)), keep=Keep.TOP, mode=Mode.PRIVATE)
    add(fillet_2_piece_2, mode=Mode.SUBTRACT)
    with BuildSketch(Plane(origin=(56, -10, 5.038446737), x_dir=(0, 0, -1), z_dir=(-1, 0, 0))) as fillet_2_piece_3:
        with BuildLine():
            CenterArc((FILLET_2_R * 0.827283117634, -FILLET_2_R), FILLET_2_R, 90, 79.200760026)
            Line((-FILLET_2_R * 0.155006618612, -FILLET_2_R * 0.812631715421), (-FILLET_2_R * 0.174652413337, -FILLET_2_R * 0.808884349729))
            Line((-FILLET_2_R * 0.174652413337, -FILLET_2_R * 0.808884349729), (-FILLET_2_R * 0.0165456623527, FILLET_2_R * 0.02))
            Line((-FILLET_2_R * 0.0165456623527, FILLET_2_R * 0.02), (FILLET_2_R * 0.827283117634, FILLET_2_R * 0.02))
            Line((FILLET_2_R * 0.827283117634, FILLET_2_R * 0.02), (FILLET_2_R * 0.827283117634, 0))
        make_face()
    extrude(amount=15.927397412, mode=Mode.SUBTRACT)
    with BuildSketch(Plane(origin=(58, -8.374736569, 5.348459975), x_dir=(3.552713678800502e-15, 0.18736828457892515, -0.9822897362458548), z_dir=(0, 0.9822897362458548, 0.18736828457892515))) as fillet_2_piece_4:
        with BuildLine():
            CenterArc((FILLET_2_R, FILLET_2_R), FILLET_2_R, 180, 90)
            Line((0, FILLET_2_R), (-FILLET_2_R * 0.02, FILLET_2_R))
            Line((-FILLET_2_R * 0.02, FILLET_2_R), (-FILLET_2_R * 0.02, -FILLET_2_R * 0.02))
            Line((-FILLET_2_R * 0.02, -FILLET_2_R * 0.02), (FILLET_2_R, -FILLET_2_R * 0.02))
            Line((FILLET_2_R, -FILLET_2_R * 0.02), (FILLET_2_R, 0))
        make_face()
    extrude(amount=61.246912376, mode=Mode.SUBTRACT)
    with BuildSketch(Plane(origin=(58, 40, -31), x_dir=(-1, 0, 0), z_dir=(0, 0, 1))) as fillet_2_piece_5:
        with BuildLine():
            CenterArc((FILLET_2_R, FILLET_2_R), FILLET_2_R, 180, 90)
            Line((0, FILLET_2_R), (-FILLET_2_R * 0.02, FILLET_2_R))
            Line((-FILLET_2_R * 0.02, FILLET_2_R), (-FILLET_2_R * 0.02, -FILLET_2_R * 0.02))
            Line((-FILLET_2_R * 0.02, -FILLET_2_R * 0.02), (FILLET_2_R, -FILLET_2_R * 0.02))
            Line((FILLET_2_R, -FILLET_2_R * 0.02), (FILLET_2_R, 0))
        make_face()
    extrude(amount=57.575769467, mode=Mode.SUBTRACT)
    with BuildSketch(Plane(origin=(58, -10, 3.383880502), x_dir=(-1, 0, 0), z_dir=(0, 0, -1))) as fillet_2_piece_6:
        with BuildLine():
            CenterArc((FILLET_2_R, FILLET_2_R), FILLET_2_R, 180, 90)
            Line((0, FILLET_2_R), (-FILLET_2_R * 0.02, FILLET_2_R))
            Line((-FILLET_2_R * 0.02, FILLET_2_R), (-FILLET_2_R * 0.02, -FILLET_2_R * 0.02))
            Line((-FILLET_2_R * 0.02, -FILLET_2_R * 0.02), (FILLET_2_R, -FILLET_2_R * 0.02))
            Line((FILLET_2_R, -FILLET_2_R * 0.02), (FILLET_2_R, 0))
        make_face()
    extrude(amount=34.383880502, mode=Mode.SUBTRACT)
    with BuildSketch(Plane(origin=(58, -22, -19), x_dir=(-1, 0, 0), z_dir=(0, 1, 0)), Plane(origin=(62, 40.562104854, 14.682988975), x_dir=(0, 0.1873682845789233, -0.9822897362458551), z_dir=(-1, 0, 0))) as fillet_2_piece_7:
        with BuildLine():
            CenterArc((FILLET_2_R, FILLET_2_R), FILLET_2_R, 180, 90)
            Line((0, FILLET_2_R), (-FILLET_2_R * 0.02, FILLET_2_R))
            Line((-FILLET_2_R * 0.02, FILLET_2_R), (-FILLET_2_R * 0.02, -FILLET_2_R * 0.02))
            Line((-FILLET_2_R * 0.02, -FILLET_2_R * 0.02), (FILLET_2_R, -FILLET_2_R * 0.02))
            Line((FILLET_2_R, -FILLET_2_R * 0.02), (FILLET_2_R, 0))
        make_face()
    extrude(amount=74, mode=Mode.SUBTRACT)
    with BuildSketch(Plane(origin=(0, 52.349581689, 16.93140839), x_dir=(0, 0.18736828457892515, -0.9822897362458548), z_dir=(0, -0.9822897362458548, -0.18736828457892515))) as fillet_2_piece_8:
        with BuildLine():
            CenterArc((FILLET_2_R, FILLET_2_R), FILLET_2_R, 180, 90)
            Line((0, FILLET_2_R), (-FILLET_2_R * 0.02, FILLET_2_R))
            Line((-FILLET_2_R * 0.02, FILLET_2_R), (-FILLET_2_R * 0.02, -FILLET_2_R * 0.02))
            Line((-FILLET_2_R * 0.02, -FILLET_2_R * 0.02), (FILLET_2_R, -FILLET_2_R * 0.02))
            Line((FILLET_2_R, -FILLET_2_R * 0.02), (FILLET_2_R, 0))
        make_face()
    extrude(amount=60.203274392, mode=Mode.SUBTRACT)

    # 圆角3
    fillet_3_edges = [part.edges().sort_by_distance(p)[0] for p in [
        (20.1, 10, 4),
    ]]
    fillet(fillet_3_edges, radius=FILLET_3_R)


solid = part.part
